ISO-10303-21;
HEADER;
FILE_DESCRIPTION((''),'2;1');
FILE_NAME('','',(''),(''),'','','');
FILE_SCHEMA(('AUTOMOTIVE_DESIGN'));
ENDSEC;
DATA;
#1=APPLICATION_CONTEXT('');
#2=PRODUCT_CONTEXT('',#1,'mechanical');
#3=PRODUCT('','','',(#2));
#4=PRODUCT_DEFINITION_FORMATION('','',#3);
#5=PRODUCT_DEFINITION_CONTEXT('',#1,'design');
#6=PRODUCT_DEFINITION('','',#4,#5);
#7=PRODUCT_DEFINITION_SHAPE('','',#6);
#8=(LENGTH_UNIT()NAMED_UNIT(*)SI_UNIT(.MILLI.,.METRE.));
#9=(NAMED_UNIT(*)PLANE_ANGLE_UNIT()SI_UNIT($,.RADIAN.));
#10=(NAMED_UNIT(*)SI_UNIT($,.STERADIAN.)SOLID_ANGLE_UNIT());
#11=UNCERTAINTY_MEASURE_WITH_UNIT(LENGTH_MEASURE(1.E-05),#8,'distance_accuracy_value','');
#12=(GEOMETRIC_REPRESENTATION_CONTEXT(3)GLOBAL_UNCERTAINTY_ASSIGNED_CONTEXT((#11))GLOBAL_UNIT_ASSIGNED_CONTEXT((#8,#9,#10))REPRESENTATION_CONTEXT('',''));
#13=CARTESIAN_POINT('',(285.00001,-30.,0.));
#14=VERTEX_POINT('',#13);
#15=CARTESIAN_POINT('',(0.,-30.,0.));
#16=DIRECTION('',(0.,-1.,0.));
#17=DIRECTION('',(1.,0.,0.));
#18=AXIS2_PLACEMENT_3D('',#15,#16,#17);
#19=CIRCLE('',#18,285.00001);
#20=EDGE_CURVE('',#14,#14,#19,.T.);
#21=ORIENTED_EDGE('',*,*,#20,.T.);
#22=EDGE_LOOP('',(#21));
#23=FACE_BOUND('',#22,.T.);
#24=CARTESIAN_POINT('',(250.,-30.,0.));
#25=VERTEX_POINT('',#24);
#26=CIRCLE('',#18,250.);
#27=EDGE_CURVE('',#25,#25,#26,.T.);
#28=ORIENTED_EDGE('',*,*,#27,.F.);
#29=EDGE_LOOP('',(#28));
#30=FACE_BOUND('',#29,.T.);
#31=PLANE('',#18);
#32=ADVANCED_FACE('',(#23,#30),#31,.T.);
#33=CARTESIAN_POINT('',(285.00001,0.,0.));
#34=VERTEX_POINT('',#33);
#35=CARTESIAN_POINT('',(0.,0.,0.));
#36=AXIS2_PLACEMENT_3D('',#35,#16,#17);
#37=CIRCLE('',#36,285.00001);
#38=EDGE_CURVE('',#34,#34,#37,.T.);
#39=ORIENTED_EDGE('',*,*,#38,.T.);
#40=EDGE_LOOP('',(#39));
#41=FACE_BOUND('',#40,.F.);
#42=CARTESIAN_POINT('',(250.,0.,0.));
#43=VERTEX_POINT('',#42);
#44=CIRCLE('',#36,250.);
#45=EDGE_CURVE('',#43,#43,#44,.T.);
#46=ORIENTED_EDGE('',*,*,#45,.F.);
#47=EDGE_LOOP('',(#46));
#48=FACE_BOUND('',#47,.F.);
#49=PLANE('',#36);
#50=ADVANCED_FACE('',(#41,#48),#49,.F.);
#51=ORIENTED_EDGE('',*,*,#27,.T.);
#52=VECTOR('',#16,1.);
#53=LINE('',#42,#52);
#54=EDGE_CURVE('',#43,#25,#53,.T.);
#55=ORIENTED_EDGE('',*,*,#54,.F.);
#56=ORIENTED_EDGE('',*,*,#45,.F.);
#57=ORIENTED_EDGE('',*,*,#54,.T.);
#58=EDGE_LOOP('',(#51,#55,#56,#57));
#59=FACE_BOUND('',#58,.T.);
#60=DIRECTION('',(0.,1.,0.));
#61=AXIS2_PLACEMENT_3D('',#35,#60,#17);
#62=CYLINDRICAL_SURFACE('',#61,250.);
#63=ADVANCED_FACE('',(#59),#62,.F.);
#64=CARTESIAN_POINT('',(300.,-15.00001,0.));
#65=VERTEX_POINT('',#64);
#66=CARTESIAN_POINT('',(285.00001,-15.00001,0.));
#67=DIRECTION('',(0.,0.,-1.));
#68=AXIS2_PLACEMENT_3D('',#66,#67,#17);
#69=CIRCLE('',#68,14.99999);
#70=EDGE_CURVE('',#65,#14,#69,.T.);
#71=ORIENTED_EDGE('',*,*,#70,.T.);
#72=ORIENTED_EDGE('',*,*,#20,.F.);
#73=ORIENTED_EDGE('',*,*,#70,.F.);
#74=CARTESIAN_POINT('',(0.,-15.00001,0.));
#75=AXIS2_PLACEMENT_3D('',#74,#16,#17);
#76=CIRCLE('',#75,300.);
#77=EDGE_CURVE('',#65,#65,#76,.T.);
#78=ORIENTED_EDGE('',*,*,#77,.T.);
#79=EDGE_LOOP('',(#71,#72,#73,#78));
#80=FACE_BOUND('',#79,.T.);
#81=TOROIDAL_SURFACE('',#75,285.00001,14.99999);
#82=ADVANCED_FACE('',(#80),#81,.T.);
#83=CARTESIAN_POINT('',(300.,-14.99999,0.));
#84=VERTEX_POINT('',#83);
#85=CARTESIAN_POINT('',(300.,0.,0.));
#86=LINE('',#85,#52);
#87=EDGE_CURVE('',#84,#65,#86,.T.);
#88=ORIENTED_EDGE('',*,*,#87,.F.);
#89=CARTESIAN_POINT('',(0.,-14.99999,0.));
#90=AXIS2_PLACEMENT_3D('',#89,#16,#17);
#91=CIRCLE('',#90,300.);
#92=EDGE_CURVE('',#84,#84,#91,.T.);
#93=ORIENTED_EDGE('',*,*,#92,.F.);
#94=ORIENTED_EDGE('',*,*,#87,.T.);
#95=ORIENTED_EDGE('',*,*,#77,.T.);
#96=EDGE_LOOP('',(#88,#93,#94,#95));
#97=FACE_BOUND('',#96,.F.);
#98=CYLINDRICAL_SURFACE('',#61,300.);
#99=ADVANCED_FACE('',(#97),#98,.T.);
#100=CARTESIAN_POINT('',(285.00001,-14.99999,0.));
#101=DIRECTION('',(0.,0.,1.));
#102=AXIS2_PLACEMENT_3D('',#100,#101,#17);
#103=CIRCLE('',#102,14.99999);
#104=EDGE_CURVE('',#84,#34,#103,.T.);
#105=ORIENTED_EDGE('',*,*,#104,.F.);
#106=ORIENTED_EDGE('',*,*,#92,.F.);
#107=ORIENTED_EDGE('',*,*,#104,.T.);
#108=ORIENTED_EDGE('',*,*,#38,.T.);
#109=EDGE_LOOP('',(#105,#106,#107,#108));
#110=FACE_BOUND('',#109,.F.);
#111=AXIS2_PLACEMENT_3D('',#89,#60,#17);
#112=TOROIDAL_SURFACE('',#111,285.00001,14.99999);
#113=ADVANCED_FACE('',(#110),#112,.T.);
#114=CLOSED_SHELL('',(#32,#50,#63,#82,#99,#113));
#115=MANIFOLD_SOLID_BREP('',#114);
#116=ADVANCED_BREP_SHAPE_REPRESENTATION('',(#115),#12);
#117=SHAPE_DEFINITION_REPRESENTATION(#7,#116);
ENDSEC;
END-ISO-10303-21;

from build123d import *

# Parameters (mm, degrees)
F0_R     = 300
F0_R_2   = 250
F1_DEPTH = 30
F2_R     = 14.99999


# Not quite as in the source:
# - a fillet or chamfer is up to 0.001 mm smaller than in the source, because OpenCascade refuses the exact size


with BuildPart() as f1:
    # F0 (on Front) → F1 (new body)
    with BuildSketch(Plane.XZ):
        Circle(F0_R)
        Circle(F0_R_2, mode=Mode.SUBTRACT)
    extrude(amount=F1_DEPTH)

    # F2 (radius 15 in the source; OpenCascade refuses exactly that, so slightly less here)
    f2_edges = [f1.edges().sort_by_distance(p)[0] for p in [
        (300, -15, 0),
        (-300, 0, 0),
        (-300, -30, 0),
    ]]
    fillet(f2_edges, radius=F2_R)


solid = f1.part
